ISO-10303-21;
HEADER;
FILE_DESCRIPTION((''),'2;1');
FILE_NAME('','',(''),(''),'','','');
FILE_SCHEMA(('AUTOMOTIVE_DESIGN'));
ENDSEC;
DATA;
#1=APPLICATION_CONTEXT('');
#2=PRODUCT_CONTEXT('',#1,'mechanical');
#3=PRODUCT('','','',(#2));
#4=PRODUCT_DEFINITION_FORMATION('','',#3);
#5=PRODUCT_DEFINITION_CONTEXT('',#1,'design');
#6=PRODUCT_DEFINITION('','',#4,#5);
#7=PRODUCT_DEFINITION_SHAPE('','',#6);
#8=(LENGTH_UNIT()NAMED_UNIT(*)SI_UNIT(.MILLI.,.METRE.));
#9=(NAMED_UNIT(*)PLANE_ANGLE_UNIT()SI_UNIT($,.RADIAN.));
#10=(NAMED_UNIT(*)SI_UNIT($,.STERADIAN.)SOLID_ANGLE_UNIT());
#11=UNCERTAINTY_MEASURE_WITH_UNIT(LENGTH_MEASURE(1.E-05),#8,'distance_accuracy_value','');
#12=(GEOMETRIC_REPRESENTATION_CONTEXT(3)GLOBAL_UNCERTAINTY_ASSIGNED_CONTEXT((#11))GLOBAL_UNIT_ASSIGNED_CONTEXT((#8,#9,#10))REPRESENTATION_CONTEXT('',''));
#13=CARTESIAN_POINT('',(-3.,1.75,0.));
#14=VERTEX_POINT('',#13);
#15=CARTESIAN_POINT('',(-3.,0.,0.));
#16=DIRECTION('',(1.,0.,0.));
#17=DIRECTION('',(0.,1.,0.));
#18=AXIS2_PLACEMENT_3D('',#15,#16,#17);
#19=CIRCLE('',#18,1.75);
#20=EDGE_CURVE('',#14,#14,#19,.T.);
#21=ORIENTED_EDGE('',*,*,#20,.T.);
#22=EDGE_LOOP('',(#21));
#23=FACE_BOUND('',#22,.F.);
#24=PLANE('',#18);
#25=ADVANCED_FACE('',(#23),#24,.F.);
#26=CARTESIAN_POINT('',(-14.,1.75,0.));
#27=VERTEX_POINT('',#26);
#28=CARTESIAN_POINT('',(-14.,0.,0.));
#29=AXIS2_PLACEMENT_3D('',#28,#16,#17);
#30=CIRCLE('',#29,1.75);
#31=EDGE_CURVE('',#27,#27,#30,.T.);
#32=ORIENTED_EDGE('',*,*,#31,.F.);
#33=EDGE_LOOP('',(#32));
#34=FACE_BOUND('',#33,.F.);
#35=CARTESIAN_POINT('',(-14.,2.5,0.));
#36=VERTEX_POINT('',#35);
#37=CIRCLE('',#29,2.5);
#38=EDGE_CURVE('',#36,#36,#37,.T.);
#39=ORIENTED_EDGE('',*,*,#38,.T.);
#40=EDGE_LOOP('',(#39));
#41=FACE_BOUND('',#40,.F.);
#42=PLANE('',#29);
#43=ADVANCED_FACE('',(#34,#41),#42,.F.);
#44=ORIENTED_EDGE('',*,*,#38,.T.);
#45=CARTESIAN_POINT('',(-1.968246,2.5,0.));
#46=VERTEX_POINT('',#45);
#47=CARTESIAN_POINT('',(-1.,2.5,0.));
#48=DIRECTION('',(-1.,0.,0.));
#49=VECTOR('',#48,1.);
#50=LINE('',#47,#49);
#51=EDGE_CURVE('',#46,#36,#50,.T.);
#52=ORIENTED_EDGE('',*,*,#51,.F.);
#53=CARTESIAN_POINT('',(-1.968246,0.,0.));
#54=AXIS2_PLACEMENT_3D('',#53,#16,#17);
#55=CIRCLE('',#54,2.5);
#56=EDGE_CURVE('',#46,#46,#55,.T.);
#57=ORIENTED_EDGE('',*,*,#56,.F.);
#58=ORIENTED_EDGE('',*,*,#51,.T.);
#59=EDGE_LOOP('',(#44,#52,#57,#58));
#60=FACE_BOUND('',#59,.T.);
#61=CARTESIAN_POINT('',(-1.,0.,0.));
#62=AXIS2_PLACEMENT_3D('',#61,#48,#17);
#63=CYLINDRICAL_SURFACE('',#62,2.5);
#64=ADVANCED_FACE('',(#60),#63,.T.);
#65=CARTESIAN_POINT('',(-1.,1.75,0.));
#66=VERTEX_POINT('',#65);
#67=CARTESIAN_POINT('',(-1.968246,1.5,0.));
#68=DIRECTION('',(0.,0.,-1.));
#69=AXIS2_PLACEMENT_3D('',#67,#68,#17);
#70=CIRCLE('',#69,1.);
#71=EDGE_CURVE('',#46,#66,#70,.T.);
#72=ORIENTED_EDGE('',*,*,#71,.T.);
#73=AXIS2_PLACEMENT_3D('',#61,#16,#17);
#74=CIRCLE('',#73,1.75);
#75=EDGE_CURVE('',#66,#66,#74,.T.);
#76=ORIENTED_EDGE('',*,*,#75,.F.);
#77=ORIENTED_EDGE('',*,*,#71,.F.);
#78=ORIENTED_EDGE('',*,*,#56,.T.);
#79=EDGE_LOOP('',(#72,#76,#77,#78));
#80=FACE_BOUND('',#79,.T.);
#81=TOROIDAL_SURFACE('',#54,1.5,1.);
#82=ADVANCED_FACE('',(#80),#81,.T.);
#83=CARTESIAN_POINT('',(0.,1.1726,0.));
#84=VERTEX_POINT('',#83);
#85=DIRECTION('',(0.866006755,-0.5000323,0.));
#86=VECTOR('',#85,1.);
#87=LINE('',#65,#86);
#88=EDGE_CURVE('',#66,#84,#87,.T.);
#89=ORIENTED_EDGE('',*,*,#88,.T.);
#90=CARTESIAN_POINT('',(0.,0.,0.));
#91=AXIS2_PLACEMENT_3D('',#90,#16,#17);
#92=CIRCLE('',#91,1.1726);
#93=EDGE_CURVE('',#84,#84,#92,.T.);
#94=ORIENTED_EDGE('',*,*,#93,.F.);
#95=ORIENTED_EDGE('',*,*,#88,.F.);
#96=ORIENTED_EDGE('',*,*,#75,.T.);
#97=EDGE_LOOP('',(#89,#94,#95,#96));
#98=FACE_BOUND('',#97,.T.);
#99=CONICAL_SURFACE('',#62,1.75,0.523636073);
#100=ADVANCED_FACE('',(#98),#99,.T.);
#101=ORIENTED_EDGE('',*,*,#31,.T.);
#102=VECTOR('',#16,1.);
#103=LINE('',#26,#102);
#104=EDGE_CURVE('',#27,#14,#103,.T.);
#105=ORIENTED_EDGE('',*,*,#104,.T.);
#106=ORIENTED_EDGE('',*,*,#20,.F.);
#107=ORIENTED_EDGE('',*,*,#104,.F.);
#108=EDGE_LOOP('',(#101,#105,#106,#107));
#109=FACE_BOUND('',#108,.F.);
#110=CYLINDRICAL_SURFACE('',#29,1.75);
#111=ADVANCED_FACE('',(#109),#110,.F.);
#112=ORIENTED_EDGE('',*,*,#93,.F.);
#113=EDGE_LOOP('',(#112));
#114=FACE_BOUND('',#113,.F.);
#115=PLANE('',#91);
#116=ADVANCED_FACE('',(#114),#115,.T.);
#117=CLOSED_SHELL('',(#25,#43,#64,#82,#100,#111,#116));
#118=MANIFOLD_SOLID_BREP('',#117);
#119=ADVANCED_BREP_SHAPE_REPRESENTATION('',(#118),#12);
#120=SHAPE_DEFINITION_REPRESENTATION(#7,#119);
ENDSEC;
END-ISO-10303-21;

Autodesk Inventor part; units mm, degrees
ref_plane "YZ Plane" through (0, 0, 0) normal (1, 0, 0) x (0, 1, 0)
ref_plane "XZ Plane" through (0, 0, 0) normal (0, 1, 0) x (-1, 0, 0)
ref_plane "XY Plane" through (0, 0, 0) normal (0, 0, 1) x (1, 0, 0)
sketch "Sketch1" plane through (0, 0, 0) normal (0, 0, 1) x (1, 0, 0)
  line L0 (-16.8, 0) -> (2.8, 0) construction
  line L1 (0, -0.5) -> (0, 3) construction
  line L2 (0, 0) -> (0, 1.1726)
  line L3 (-1, 2.5) -> (-14, 2.5)
  line L4 (-14, 2.5) -> (-14, 1.75)
  line L5 (-14, 1.75) -> (-3, 1.75)
  line L6 (-3, 1.75) -> (-3, 0)
  line L7 (-3, 0) -> (0, 0)
  line L8 (-1, 2.5) -> (-1, 1.75)
  line L9 (-1, 1.75) -> (0, 1.1726)
  dimension "d0" = 5
  dimension "d1" = 3.5
  dimension "d3" = 14
  dimension "d6" = 2
  dimension "d7" = 60
  dimension "d9" = 1
revolve "Revolution1" add sketch "Sketch1" angle 360 about axis through (-10, 0, 0) along (1, 0, 0)
fillet "Fillet2" radius 1 1 edges at (-1, -2.5, 0)
properties part number "P110" material "ABS Plastic"
